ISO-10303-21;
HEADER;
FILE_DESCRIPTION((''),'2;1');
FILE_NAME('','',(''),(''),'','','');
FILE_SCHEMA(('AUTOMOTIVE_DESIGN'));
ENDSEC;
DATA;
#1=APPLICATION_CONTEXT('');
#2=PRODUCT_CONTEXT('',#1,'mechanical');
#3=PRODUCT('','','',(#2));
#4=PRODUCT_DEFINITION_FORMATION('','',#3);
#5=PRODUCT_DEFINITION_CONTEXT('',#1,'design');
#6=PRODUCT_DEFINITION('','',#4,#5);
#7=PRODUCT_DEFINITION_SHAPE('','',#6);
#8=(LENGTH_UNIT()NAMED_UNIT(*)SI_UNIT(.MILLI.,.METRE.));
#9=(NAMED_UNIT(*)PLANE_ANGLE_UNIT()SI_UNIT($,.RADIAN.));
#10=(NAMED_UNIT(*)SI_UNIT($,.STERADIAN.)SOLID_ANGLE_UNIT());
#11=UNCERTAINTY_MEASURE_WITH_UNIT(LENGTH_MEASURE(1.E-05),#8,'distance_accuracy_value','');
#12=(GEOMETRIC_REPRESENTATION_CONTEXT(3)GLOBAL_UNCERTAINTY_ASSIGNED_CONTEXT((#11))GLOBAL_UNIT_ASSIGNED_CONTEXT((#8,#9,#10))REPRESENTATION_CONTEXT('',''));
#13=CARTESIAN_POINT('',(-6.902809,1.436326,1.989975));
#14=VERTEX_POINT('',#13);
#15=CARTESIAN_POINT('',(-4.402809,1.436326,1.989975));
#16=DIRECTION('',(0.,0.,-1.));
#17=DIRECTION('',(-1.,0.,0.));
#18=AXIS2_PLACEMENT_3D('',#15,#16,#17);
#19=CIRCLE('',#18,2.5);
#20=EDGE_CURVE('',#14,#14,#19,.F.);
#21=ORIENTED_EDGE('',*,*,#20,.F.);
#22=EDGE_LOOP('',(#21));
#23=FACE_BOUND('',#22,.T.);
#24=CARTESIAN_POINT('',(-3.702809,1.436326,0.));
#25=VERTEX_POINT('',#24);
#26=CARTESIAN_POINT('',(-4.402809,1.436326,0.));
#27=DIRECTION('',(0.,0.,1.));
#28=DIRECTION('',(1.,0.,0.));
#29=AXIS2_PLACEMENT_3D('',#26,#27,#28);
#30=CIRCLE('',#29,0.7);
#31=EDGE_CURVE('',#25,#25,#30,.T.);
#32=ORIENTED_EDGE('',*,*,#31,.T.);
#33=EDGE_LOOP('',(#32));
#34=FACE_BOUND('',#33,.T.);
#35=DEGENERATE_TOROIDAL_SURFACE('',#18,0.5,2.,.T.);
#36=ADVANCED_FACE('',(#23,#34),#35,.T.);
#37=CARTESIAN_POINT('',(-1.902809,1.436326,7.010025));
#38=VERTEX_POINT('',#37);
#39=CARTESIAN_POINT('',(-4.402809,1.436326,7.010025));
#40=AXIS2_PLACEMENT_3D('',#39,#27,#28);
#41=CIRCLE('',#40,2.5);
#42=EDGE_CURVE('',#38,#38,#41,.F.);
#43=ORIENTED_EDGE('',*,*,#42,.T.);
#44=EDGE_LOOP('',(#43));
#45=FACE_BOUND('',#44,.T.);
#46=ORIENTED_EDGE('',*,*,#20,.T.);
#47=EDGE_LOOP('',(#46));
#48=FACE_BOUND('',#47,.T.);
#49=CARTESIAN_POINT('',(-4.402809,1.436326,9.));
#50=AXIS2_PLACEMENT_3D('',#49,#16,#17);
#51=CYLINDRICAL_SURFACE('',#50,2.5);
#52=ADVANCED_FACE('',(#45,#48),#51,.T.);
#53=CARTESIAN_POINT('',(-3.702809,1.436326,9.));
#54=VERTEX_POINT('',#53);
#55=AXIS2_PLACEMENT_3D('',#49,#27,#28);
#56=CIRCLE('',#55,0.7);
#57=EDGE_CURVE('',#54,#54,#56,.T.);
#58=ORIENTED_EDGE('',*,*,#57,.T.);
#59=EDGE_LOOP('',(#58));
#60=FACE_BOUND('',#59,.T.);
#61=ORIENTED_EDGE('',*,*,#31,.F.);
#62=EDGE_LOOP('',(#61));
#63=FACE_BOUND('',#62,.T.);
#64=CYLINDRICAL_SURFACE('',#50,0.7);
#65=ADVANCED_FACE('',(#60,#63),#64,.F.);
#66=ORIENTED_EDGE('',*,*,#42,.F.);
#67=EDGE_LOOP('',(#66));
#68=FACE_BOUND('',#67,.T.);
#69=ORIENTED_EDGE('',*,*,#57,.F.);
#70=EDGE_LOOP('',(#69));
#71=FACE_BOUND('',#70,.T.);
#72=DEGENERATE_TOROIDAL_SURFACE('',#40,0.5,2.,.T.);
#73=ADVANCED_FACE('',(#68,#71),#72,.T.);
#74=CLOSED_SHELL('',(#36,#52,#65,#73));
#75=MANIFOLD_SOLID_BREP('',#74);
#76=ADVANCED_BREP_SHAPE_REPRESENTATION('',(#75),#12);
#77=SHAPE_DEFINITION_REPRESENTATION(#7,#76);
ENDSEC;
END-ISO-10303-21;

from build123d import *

# Parameters (mm, degrees)
SKETCH1_R           = 2.5
SKETCH1_R_2         = 0.7
BOSS_EXTRUDE2_DEPTH = 9
FILLET2_R           = 2


with BuildPart() as part:
    # Sketch1 → Boss-Extrude2 (new body)
    with BuildSketch(Plane.XY):
        with Locations((-4.402809494, 1.436326376)):
            Circle(SKETCH1_R)
        with Locations((-4.402809494, 1.436326376)):
            Circle(SKETCH1_R_2, mode=Mode.SUBTRACT)
    extrude(amount=BOSS_EXTRUDE2_DEPTH)

    # Fillet2
    # the kernel refuses this fillet: 2 mm, written as the material it takes off along each edge
    with BuildSketch(Plane(origin=(-4.402809494, 1.436326376, 0), x_dir=(1, 0, 0), z_dir=(0, -1, 0))) as fillet2_piece_1:
        with BuildLine():
            CenterArc((0.5, 1.989974874), FILLET2_R, 275.739170477, 84.260829523)
            Line((0.7, 0), (0.704, -0.039799497))
            ThreePointArc((0.704, -0.039799497), (1.6, -0.04), (2.5, -0.04))
            Line((2.5, -0.04), (2.54, 0))
            Line((2.54, 0), (2.54, 1.989974874))
            Line((2.54, 1.989974874), (2.5, 1.989974874))
        make_face()
    revolve(axis=Axis((-4.402809494, 1.436326376, 0), (0, 0, 1)), mode=Mode.SUBTRACT)
    with BuildSketch(Plane(origin=(-4.402809494, 1.436326376, 9), x_dir=(1, 0, 0), z_dir=(0, -1, 0))) as fillet2_piece_2:
        with BuildLine():
            CenterArc((0.5, -1.989974874), FILLET2_R, 0, 84.260829523)
            Line((0.7, 0), (0.704, 0.039799497))
            ThreePointArc((0.704, 0.039799497), (1.6, 0.04), (2.5, 0.04))
            Line((2.5, 0.04), (2.54, 0))
            Line((2.54, 0), (2.54, -1.989974874))
            Line((2.54, -1.989974874), (2.5, -1.989974874))
        make_face()
    revolve(axis=Axis((-4.402809494, 1.436326376, 9), (0, 0, 1)), mode=Mode.SUBTRACT)


solid = part.part
